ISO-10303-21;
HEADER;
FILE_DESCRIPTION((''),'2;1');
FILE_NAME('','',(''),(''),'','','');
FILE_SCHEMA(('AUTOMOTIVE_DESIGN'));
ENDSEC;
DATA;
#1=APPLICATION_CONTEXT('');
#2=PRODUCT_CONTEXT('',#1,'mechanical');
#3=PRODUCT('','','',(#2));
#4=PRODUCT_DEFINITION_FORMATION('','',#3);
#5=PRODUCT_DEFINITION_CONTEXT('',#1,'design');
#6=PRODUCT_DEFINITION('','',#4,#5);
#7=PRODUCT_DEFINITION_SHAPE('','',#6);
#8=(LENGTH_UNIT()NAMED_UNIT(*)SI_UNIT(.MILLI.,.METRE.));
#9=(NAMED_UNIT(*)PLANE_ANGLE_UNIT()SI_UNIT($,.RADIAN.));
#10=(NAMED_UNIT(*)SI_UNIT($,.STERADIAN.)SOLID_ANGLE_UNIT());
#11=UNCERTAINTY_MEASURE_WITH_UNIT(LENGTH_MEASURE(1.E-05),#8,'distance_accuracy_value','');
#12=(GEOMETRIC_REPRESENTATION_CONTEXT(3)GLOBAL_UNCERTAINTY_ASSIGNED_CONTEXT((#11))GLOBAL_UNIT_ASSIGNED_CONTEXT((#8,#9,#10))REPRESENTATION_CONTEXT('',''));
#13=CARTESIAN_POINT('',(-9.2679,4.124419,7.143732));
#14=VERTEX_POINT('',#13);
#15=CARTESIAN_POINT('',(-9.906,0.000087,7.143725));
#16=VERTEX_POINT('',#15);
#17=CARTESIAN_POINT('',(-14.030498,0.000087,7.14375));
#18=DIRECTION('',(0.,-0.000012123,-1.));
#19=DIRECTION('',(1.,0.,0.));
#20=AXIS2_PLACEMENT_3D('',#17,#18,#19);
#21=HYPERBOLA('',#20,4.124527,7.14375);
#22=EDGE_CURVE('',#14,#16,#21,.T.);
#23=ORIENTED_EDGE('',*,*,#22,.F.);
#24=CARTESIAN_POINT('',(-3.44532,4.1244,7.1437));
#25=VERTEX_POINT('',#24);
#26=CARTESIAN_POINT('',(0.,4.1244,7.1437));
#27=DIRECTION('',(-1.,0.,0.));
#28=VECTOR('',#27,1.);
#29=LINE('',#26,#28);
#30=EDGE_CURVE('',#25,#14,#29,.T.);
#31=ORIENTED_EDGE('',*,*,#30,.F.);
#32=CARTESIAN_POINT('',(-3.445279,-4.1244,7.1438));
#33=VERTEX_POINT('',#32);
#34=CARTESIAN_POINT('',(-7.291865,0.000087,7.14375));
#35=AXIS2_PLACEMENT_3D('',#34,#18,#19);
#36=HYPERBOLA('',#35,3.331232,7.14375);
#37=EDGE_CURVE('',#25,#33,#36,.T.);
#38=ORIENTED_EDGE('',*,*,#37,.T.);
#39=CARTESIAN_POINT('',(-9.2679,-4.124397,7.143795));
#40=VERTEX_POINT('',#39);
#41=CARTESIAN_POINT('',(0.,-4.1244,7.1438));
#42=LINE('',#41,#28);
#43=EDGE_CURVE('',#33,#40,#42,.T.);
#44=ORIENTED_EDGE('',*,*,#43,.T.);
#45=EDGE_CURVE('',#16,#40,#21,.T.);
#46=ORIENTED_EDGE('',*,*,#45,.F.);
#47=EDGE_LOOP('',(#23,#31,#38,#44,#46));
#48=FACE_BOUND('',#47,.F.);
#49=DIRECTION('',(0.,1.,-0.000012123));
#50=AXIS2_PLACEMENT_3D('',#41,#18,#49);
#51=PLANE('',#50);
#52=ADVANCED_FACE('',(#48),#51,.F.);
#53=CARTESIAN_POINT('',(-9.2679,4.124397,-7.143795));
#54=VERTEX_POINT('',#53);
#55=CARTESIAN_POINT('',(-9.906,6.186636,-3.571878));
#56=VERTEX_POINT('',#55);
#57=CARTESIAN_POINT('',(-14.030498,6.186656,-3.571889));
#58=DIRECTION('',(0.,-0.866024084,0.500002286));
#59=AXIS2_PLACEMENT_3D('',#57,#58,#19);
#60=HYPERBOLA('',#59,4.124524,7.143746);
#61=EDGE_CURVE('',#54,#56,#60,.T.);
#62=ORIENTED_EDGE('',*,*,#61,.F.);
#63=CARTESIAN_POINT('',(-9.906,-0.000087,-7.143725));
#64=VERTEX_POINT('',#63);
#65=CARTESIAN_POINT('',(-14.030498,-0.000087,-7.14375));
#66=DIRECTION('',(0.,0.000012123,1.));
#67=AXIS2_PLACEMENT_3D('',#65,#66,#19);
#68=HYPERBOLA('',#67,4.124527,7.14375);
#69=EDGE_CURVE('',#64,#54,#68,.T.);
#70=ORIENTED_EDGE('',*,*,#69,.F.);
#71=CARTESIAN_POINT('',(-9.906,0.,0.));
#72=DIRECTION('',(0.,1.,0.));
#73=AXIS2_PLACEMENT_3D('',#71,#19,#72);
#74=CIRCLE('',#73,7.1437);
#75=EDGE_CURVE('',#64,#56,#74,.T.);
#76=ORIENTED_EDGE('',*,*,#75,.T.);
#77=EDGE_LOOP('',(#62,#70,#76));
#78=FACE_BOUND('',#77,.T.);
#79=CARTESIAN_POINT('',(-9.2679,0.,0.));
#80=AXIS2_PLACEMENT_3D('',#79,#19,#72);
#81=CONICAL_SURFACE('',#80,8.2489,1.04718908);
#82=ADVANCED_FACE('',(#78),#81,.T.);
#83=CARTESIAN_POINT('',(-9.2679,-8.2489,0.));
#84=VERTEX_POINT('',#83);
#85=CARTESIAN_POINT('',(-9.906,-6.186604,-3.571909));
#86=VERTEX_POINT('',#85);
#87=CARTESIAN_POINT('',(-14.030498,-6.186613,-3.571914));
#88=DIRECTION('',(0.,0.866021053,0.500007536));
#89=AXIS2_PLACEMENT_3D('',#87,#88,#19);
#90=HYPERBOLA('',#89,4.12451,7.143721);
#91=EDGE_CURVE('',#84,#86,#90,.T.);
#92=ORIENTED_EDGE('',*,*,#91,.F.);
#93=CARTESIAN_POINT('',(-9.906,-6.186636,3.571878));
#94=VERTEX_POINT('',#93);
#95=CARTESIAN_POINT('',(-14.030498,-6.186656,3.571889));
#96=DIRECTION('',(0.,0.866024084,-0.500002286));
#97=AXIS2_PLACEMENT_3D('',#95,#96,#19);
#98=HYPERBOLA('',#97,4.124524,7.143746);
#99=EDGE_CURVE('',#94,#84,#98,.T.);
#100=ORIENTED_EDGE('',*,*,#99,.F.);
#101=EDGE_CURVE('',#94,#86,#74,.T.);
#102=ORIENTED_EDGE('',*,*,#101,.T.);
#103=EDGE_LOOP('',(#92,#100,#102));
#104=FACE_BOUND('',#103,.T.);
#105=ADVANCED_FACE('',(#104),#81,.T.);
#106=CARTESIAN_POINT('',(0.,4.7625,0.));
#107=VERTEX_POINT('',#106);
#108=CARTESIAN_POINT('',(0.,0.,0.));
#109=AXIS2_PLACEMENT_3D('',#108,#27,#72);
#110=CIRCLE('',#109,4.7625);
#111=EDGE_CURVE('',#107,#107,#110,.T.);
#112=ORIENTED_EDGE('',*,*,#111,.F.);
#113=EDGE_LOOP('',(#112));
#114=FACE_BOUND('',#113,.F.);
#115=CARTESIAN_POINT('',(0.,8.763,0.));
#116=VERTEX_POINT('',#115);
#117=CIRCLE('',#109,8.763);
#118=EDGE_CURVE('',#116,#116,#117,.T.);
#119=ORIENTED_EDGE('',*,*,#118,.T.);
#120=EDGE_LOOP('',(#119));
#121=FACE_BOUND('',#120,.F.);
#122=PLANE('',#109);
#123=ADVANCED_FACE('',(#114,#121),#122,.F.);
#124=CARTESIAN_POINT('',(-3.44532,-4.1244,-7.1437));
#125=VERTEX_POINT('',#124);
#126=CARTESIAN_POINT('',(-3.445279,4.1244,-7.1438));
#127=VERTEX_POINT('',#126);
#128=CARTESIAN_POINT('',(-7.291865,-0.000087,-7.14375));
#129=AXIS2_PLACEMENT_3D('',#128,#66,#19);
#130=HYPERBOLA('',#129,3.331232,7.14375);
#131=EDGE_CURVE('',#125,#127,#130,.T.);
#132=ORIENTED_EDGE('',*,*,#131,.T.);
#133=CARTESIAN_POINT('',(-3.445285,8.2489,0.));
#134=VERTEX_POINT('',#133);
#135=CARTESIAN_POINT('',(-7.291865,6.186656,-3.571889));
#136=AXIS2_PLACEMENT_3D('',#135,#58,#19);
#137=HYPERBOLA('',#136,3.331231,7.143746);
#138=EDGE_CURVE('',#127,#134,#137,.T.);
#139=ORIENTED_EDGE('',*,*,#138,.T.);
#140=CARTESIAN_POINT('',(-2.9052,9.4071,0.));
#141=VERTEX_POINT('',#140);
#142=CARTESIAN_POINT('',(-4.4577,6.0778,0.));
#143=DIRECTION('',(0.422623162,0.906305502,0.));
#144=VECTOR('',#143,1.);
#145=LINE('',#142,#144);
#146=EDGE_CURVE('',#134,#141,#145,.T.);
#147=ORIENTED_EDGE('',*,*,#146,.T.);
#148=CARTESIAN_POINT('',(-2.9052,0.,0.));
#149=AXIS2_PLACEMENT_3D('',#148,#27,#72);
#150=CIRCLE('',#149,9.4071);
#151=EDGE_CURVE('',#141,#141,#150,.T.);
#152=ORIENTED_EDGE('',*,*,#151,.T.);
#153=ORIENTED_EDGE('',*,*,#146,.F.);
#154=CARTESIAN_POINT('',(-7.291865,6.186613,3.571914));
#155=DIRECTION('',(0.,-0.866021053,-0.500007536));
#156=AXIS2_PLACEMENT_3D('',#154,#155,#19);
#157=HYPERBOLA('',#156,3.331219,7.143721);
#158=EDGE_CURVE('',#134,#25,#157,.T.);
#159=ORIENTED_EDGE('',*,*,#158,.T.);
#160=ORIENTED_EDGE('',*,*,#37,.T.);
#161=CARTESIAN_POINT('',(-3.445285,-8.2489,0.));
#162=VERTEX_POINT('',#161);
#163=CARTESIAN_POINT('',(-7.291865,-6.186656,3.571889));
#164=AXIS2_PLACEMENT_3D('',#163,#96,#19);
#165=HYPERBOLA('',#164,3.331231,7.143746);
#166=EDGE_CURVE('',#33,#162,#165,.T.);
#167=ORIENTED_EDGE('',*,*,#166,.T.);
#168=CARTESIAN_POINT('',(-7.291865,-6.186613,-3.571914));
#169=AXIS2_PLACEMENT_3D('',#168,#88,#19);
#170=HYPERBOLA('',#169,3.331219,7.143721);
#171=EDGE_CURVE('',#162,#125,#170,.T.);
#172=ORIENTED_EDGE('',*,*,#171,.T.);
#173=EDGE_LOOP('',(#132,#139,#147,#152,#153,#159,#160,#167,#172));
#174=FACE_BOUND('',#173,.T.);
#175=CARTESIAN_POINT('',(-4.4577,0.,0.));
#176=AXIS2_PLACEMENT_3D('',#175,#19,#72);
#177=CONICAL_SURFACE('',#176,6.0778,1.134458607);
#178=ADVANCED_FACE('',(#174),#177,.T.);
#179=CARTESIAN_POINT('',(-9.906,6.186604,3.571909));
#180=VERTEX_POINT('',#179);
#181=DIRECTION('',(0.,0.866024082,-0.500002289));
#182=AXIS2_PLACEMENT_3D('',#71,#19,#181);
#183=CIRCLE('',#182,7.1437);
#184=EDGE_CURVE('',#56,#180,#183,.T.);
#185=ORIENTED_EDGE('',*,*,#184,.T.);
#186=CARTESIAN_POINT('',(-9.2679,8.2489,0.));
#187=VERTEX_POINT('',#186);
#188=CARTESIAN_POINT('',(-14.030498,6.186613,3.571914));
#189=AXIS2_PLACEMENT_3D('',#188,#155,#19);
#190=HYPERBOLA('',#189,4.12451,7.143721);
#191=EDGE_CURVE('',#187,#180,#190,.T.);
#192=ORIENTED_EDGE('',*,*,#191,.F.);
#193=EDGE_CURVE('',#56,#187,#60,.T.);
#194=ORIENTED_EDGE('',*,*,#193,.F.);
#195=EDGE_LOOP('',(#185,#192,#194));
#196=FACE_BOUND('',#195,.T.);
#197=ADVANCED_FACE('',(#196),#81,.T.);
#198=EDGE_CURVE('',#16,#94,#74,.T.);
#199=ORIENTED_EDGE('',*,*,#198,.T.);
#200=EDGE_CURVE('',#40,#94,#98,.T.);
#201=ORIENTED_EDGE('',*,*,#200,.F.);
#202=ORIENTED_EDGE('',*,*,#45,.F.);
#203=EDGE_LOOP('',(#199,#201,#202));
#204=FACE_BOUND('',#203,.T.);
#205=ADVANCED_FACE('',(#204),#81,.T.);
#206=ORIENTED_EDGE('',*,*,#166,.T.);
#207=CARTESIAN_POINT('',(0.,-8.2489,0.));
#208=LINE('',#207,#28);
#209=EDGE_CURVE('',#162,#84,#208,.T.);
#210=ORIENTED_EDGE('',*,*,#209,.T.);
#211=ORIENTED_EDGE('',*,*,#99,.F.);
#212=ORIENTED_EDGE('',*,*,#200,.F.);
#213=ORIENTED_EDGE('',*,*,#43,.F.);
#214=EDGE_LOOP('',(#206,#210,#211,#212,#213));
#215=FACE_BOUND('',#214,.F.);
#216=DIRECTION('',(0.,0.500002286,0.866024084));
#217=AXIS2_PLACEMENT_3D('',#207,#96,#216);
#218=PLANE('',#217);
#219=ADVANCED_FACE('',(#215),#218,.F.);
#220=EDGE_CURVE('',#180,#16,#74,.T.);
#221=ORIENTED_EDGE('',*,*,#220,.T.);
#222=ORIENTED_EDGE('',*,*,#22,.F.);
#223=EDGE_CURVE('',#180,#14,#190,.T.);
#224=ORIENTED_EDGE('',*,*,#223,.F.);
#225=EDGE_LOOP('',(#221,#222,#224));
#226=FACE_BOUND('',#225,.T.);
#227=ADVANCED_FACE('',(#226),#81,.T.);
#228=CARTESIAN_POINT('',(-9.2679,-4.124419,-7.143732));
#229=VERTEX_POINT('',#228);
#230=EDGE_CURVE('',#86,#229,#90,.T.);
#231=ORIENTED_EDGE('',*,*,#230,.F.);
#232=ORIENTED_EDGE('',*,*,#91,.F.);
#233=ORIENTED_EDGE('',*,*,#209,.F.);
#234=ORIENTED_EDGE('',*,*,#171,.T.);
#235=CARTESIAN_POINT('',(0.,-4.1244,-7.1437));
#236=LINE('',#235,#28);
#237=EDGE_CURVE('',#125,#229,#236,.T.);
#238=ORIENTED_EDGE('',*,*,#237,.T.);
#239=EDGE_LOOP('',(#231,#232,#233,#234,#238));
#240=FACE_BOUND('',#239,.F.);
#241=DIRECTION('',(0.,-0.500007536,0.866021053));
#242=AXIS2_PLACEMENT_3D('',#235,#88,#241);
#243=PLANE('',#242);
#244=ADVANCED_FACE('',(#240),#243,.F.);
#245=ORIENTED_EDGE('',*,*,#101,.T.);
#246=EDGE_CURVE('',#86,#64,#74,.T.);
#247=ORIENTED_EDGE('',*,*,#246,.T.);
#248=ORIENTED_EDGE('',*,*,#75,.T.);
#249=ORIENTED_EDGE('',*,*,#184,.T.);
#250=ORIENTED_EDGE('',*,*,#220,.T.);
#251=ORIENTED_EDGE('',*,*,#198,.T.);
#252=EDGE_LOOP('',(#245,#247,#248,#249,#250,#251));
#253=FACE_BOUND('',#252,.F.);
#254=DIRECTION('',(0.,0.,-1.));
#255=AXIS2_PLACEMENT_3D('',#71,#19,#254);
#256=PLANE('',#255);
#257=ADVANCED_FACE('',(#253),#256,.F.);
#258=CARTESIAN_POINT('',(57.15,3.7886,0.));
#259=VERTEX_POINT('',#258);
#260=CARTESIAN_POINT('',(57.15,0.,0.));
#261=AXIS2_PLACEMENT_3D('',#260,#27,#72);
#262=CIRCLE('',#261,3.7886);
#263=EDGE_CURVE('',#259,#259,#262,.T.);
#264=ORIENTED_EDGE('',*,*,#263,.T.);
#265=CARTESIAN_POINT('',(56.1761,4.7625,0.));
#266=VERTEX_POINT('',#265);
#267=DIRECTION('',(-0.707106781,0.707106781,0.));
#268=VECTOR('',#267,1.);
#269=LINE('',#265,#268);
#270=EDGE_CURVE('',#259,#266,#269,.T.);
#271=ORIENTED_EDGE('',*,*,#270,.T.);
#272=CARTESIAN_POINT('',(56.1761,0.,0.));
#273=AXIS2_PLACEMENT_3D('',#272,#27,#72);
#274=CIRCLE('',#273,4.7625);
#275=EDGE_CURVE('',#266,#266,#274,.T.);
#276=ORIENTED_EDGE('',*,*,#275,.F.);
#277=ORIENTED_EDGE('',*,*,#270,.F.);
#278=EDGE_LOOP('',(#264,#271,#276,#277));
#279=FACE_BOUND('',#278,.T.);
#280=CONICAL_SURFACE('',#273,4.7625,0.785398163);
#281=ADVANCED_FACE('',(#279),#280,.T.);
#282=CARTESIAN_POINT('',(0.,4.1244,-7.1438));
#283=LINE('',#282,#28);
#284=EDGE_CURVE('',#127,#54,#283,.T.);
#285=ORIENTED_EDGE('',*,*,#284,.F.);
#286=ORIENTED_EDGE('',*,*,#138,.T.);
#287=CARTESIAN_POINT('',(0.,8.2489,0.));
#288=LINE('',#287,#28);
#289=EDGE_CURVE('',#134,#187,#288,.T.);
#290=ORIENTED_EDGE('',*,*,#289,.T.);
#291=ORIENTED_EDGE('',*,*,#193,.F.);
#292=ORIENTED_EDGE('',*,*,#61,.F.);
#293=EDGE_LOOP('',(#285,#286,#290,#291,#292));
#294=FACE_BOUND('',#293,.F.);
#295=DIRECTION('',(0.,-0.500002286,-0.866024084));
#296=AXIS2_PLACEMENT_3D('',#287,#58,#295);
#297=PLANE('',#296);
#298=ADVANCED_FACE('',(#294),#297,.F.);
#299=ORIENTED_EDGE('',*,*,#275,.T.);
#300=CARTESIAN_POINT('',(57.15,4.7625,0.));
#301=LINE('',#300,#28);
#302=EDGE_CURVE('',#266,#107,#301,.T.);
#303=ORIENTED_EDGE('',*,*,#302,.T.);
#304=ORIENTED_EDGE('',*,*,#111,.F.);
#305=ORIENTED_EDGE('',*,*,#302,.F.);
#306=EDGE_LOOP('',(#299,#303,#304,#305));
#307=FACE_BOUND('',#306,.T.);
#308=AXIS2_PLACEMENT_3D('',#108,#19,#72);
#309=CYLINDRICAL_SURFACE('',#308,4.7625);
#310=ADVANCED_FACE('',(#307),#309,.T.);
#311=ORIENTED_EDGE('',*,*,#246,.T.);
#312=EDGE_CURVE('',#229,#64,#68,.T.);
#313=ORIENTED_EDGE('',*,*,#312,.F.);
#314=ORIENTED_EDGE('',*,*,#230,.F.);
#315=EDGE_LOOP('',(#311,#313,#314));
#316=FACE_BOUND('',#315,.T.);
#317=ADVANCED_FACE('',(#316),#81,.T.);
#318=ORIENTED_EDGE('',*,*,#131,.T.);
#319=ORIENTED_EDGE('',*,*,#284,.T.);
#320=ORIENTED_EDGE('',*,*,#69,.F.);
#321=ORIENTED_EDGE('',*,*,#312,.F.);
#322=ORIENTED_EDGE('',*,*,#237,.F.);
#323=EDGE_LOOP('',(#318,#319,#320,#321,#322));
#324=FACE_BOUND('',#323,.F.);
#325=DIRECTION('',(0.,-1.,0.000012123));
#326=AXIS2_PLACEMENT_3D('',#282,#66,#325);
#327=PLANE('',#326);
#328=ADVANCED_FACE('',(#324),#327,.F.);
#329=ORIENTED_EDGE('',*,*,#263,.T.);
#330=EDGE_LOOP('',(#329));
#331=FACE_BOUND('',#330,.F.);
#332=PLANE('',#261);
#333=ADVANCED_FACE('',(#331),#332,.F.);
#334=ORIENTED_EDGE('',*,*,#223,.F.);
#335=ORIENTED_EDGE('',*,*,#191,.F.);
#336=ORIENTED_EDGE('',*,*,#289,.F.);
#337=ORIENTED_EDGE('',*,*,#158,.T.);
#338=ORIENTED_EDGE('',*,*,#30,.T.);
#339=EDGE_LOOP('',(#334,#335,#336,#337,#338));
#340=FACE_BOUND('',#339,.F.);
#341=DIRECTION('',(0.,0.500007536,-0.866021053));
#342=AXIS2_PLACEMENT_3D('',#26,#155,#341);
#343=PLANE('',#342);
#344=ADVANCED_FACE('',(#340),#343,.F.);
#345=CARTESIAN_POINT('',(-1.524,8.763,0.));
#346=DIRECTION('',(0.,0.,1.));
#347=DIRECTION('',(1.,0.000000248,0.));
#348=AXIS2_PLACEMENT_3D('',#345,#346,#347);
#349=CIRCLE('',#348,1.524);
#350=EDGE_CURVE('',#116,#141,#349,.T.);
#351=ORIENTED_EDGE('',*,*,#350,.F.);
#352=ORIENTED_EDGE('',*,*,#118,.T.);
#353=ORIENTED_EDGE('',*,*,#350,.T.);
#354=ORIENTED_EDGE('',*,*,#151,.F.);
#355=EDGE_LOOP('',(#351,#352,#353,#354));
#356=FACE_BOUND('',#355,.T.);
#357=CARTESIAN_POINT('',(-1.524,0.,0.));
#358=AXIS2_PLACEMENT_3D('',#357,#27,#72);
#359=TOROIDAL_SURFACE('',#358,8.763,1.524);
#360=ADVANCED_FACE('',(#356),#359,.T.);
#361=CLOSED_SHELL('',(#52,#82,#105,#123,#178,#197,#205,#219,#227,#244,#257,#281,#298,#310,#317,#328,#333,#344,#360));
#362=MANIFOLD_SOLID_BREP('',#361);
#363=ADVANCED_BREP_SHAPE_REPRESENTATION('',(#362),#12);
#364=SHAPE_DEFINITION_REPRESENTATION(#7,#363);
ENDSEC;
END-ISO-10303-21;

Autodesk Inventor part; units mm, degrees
ref_plane "YZ Plane" through (0, 0, 0) normal (1, 0, 0) x (0, 1, 0)
ref_plane "XZ Plane" through (0, 0, 0) normal (0, 1, 0) x (-1, 0, 0)
sketch "Sketch1" plane through (0, 0, 0) normal (0, 0, 1) x (1, 0, 0)
  line L0 (-4.4577, 0) -> (-4.4577, 6.0778)
  line L1 (0, 8.763) -> (0, 4.7625)
  line L2 (31.75, 4.7625) -> (57.15, 4.7625)
  line L3 (57.15, 4.7625) -> (57.15, 0)
  line L4 (57.15, 0) -> (-4.4577, 0)
  arc A0 (0, 8.763) -> (-2.9052, 9.4071) centre (-1.524, 8.763) ccw
  line L5 (0, -2.1146) -> (0, 12.6875) projected
  line L6 (-16.7792, 0) -> (69.4715, 0) projected
  line L7 (0, 4.7625) -> (0.0001, 4.7625)
  line L8 (0.0001, 4.7625) -> (0.0001, 4.7625)
  line L9 (0.0001, 4.7625) -> (20.6248, 4.7625)
  line L10 (20.6248, 4.7625) -> (31.75, 4.7625)
  line L11 (-4.4577, 6.0778) -> (-2.9052, 9.4071)
  line L12 (0.0001, 4.7625) -> (31.75, 4.7625) construction
  line L13 (31.75, 4.7625) -> (31.75, 0) construction
  dimension "d0" = 1.524
  dimension "d1" = 57.15
  dimension "d2" = 25.4
  dimension "d3" = 20.574
  dimension "d4" = 9.525
  dimension "d5" = 4.4577
  dimension "d15" = 9.525
  dimension "d16" = 9.525
  dimension "d17" = 0.0001
  dimension "d18" = 11.1252
  dimension "d19" = 25
revolve "Body" add sketch "Sketch1" angle 360 about axis through (57.15, 0, 0) along (-1, 0, 0)
sketch "Sketch2" plane through (0, 0, 0) normal (1, 0, 0) x (0, 0, -1)
  line L0 (7.1438, 4.1244) -> (7.1437, -4.1244)
  line L1 (7.1437, -4.1244) -> (0, -8.2489)
  line L2 (0, -8.2489) -> (-7.1438, -4.1244)
  line L3 (-7.1438, -4.1244) -> (-7.1437, 4.1244)
  line L4 (-7.1437, 4.1244) -> (0, 8.2489)
  line L5 (0, 8.2489) -> (7.1438, 4.1244)
  point P0 (0, 0)
  point P1 (0, 0)
  dimension "d23" = 14.2875
extrude "Head" add sketch "Sketch2" against normal blind 9.906
sketch "Sketch3" plane through (0, 0, 0) normal (0, 0, 1) x (1, 0, 0)
  line L0 (-9.906, 7.1437) -> (-9.906, 8.2489)
  line L1 (-9.906, 8.2489) -> (-9.2679, 8.2489)
  line L2 (-9.2679, 8.2489) -> (-9.906, 7.1437)
  line L3 (-11.1981, 0) -> (-2.1531, 0) projected
  line L4 (-9.906, 8.2489) -> (-9.906, 4.1244) projected
  line L5 (-3.4453, 8.2489) -> (-9.906, 8.2489) projected
  point P0 (-9.906, 4.1244)
  dimension "d8" = 30
  dimension "d22" = 14.2875
revolve "Chamfer1" cut sketch "Sketch3" angle 360 about axis through (-10, 0, 0) along (1, 0, 0)
thread "Thread" size "3/8-16 UNC" class "2A" standard "ANSI Unified Screw Threads" length 25.4
chamfer "Chamfer2" distance 0.9739 distance2 0.9739 1 edges at (57.15, -4.7625, 0) measured on face at (57.15, 0.5629, 1.4843)
ref_plane "Work Plane1" through (10.95, 0, 0) normal (0, 0, -1) x (1, 0, 0)
equation "\"d23\" = SW"
equation "\"d6\" = KOH"
equation "\"d10\" = GEL"
equation "\"d13\" = -0.5 * SPD + 0.5 * GD"
equation "\"d14\" = GUL"
equation "\"d0\" = PHH"
equation "\"d1\" = NLG"
equation "\"d2\" = GEL"
equation "\"d3\" = LADI"
equation "\"d4\" = GD"
equation "\"d5\" = 0.45 * KOH"
equation "\"d15\" = SD2"
equation "\"d16\" = BDM"
equation "\"d18\" = GAL"
equation "\"d19\" = KEWI"
equation "\"d8\" = ANG1"
equation "\"d22\" = SW0"
equation "\"NLG\" = 57.15"
equation "\"GD\" = NND"
equation "\"BDM\" = NND"
equation "\"KOH\" = 9.906"
equation "\"GEL\" = 25.4"
equation "\"LADI\" = 20.574"
equation "\"SW\" = 14.2875"
equation "\"PHH\" = 1.524"
equation "\"SW0\" = SW"
equation "\"SPD\" = 7.5773"
equation "\"SD2\" = NND"
equation "\"SD\" = 0"
equation "\"ANG1\" = 30deg"
equation "\"KEWI\" = 25deg"
equation "\"GAL\" = 11.1252"
equation "\"GUL\" = 0.97385"
equation "\"THREADDIA\" = 9.525"
equation "\"SDH\" = SW"
equation "\"TOA\" = 30deg"
equation "\"NND\" = 9.525"
equation "\"E0\" = 1.155 * SW"
equation "\"GD1\" = 7.5773"
properties part number "IFI 111 - 3/8-16 UNC x 2.25" material "Steel, Mild"
